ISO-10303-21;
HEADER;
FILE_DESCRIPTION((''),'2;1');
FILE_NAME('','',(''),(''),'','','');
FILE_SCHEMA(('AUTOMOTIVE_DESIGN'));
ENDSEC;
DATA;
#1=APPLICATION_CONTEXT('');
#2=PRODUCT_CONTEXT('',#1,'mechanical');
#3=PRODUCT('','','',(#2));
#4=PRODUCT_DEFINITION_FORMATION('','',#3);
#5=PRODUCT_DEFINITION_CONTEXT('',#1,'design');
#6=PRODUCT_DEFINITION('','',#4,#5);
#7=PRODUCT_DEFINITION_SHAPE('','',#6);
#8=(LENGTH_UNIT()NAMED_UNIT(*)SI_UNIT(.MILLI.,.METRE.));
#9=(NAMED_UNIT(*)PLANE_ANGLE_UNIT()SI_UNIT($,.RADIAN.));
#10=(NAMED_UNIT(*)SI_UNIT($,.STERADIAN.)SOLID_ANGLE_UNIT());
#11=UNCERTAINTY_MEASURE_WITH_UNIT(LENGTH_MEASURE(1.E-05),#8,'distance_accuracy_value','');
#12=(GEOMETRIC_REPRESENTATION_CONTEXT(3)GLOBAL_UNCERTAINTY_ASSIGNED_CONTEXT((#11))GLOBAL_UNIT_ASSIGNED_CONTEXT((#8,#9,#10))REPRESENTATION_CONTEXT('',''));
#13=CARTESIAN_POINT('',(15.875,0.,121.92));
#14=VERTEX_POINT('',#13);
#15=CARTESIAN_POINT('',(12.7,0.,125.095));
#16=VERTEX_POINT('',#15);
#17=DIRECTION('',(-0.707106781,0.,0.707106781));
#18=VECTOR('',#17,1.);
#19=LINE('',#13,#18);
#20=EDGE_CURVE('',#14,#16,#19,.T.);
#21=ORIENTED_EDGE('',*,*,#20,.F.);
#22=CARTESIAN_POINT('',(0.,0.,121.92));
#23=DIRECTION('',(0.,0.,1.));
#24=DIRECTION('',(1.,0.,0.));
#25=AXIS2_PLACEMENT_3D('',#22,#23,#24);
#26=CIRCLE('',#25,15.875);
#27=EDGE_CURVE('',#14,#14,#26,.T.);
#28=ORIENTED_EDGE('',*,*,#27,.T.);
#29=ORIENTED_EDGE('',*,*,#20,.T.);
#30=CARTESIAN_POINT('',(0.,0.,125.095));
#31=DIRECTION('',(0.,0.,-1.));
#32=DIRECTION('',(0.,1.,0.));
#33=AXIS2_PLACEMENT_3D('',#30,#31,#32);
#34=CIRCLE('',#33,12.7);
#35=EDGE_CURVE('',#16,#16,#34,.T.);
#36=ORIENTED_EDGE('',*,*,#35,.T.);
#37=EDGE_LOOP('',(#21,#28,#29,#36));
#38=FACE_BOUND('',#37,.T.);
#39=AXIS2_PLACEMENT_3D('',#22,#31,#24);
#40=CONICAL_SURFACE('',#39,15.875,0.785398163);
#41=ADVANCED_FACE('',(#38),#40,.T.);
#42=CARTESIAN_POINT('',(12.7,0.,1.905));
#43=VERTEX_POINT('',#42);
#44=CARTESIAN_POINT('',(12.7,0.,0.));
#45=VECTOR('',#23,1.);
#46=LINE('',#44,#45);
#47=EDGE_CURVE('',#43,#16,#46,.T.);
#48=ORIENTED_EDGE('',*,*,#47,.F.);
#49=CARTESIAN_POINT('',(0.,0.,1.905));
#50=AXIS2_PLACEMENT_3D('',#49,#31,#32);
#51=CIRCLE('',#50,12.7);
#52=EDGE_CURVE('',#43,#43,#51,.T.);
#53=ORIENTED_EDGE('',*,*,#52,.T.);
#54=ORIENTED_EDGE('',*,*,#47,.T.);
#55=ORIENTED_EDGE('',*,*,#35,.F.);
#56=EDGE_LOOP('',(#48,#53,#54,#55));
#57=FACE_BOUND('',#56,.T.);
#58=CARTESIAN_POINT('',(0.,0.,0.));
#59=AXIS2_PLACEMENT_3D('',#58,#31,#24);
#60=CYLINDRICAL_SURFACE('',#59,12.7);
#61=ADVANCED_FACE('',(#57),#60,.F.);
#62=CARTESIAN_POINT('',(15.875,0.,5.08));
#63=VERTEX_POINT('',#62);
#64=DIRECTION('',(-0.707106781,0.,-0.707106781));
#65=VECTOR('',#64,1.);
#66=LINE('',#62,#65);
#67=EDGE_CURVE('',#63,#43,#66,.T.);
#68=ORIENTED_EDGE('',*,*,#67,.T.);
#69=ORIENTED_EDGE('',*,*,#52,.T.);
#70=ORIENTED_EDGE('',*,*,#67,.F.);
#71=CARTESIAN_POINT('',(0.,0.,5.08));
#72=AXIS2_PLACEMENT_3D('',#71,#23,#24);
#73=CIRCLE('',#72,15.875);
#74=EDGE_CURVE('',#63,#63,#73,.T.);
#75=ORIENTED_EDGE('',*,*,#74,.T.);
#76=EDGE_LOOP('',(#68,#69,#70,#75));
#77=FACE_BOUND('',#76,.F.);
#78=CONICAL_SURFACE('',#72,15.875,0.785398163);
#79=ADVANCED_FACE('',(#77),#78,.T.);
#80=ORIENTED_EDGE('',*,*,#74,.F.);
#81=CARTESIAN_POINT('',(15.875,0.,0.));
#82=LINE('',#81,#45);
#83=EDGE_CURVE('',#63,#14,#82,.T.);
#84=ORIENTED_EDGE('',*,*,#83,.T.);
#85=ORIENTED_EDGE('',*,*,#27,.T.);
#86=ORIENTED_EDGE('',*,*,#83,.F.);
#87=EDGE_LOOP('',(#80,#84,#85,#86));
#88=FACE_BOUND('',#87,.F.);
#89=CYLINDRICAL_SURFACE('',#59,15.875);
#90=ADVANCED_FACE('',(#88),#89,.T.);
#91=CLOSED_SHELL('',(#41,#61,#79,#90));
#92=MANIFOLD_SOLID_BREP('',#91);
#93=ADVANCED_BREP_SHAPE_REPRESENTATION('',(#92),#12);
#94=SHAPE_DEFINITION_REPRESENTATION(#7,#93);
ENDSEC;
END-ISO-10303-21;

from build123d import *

# Parameters (mm, degrees)
F0_R     = 15.875
F0_R_2   = 12.7
F1_DEPTH = 127


# Not quite as in the source:
# - a fillet or chamfer that OpenCascade refuses, or shapes differently, is made with other operations: its cross-section is extruded or revolved along the edge and cut away or added


with BuildPart() as f1:
    # F0 (on Top) → F1 (new body)
    with BuildSketch(Plane.XY):
        Circle(F0_R)
        Circle(F0_R_2, mode=Mode.SUBTRACT)
    extrude(amount=F1_DEPTH)

    # F2: chamfer of 5.08 on 3 edges, made by hand

    # F2_s1 → F2_t2 (revolve, cut)
    with BuildSketch(Plane.XZ):
        Polygon((15.875, 5.08), (10.795, 0), (15.875, 0), align=None)
    revolve(axis=Axis((0, 0, 0), (0, 0, 1)), mode=Mode.SUBTRACT)

    # F2_s3 → F2_t4 (revolve, cut)
    with BuildSketch(Plane.XZ):
        Polygon((15.875, 121.92), (10.795, 127), (15.875, 127), align=None)
    revolve(axis=Axis((0, 0, 127), (0, 0, 1)), mode=Mode.SUBTRACT)


solid = f1.part
